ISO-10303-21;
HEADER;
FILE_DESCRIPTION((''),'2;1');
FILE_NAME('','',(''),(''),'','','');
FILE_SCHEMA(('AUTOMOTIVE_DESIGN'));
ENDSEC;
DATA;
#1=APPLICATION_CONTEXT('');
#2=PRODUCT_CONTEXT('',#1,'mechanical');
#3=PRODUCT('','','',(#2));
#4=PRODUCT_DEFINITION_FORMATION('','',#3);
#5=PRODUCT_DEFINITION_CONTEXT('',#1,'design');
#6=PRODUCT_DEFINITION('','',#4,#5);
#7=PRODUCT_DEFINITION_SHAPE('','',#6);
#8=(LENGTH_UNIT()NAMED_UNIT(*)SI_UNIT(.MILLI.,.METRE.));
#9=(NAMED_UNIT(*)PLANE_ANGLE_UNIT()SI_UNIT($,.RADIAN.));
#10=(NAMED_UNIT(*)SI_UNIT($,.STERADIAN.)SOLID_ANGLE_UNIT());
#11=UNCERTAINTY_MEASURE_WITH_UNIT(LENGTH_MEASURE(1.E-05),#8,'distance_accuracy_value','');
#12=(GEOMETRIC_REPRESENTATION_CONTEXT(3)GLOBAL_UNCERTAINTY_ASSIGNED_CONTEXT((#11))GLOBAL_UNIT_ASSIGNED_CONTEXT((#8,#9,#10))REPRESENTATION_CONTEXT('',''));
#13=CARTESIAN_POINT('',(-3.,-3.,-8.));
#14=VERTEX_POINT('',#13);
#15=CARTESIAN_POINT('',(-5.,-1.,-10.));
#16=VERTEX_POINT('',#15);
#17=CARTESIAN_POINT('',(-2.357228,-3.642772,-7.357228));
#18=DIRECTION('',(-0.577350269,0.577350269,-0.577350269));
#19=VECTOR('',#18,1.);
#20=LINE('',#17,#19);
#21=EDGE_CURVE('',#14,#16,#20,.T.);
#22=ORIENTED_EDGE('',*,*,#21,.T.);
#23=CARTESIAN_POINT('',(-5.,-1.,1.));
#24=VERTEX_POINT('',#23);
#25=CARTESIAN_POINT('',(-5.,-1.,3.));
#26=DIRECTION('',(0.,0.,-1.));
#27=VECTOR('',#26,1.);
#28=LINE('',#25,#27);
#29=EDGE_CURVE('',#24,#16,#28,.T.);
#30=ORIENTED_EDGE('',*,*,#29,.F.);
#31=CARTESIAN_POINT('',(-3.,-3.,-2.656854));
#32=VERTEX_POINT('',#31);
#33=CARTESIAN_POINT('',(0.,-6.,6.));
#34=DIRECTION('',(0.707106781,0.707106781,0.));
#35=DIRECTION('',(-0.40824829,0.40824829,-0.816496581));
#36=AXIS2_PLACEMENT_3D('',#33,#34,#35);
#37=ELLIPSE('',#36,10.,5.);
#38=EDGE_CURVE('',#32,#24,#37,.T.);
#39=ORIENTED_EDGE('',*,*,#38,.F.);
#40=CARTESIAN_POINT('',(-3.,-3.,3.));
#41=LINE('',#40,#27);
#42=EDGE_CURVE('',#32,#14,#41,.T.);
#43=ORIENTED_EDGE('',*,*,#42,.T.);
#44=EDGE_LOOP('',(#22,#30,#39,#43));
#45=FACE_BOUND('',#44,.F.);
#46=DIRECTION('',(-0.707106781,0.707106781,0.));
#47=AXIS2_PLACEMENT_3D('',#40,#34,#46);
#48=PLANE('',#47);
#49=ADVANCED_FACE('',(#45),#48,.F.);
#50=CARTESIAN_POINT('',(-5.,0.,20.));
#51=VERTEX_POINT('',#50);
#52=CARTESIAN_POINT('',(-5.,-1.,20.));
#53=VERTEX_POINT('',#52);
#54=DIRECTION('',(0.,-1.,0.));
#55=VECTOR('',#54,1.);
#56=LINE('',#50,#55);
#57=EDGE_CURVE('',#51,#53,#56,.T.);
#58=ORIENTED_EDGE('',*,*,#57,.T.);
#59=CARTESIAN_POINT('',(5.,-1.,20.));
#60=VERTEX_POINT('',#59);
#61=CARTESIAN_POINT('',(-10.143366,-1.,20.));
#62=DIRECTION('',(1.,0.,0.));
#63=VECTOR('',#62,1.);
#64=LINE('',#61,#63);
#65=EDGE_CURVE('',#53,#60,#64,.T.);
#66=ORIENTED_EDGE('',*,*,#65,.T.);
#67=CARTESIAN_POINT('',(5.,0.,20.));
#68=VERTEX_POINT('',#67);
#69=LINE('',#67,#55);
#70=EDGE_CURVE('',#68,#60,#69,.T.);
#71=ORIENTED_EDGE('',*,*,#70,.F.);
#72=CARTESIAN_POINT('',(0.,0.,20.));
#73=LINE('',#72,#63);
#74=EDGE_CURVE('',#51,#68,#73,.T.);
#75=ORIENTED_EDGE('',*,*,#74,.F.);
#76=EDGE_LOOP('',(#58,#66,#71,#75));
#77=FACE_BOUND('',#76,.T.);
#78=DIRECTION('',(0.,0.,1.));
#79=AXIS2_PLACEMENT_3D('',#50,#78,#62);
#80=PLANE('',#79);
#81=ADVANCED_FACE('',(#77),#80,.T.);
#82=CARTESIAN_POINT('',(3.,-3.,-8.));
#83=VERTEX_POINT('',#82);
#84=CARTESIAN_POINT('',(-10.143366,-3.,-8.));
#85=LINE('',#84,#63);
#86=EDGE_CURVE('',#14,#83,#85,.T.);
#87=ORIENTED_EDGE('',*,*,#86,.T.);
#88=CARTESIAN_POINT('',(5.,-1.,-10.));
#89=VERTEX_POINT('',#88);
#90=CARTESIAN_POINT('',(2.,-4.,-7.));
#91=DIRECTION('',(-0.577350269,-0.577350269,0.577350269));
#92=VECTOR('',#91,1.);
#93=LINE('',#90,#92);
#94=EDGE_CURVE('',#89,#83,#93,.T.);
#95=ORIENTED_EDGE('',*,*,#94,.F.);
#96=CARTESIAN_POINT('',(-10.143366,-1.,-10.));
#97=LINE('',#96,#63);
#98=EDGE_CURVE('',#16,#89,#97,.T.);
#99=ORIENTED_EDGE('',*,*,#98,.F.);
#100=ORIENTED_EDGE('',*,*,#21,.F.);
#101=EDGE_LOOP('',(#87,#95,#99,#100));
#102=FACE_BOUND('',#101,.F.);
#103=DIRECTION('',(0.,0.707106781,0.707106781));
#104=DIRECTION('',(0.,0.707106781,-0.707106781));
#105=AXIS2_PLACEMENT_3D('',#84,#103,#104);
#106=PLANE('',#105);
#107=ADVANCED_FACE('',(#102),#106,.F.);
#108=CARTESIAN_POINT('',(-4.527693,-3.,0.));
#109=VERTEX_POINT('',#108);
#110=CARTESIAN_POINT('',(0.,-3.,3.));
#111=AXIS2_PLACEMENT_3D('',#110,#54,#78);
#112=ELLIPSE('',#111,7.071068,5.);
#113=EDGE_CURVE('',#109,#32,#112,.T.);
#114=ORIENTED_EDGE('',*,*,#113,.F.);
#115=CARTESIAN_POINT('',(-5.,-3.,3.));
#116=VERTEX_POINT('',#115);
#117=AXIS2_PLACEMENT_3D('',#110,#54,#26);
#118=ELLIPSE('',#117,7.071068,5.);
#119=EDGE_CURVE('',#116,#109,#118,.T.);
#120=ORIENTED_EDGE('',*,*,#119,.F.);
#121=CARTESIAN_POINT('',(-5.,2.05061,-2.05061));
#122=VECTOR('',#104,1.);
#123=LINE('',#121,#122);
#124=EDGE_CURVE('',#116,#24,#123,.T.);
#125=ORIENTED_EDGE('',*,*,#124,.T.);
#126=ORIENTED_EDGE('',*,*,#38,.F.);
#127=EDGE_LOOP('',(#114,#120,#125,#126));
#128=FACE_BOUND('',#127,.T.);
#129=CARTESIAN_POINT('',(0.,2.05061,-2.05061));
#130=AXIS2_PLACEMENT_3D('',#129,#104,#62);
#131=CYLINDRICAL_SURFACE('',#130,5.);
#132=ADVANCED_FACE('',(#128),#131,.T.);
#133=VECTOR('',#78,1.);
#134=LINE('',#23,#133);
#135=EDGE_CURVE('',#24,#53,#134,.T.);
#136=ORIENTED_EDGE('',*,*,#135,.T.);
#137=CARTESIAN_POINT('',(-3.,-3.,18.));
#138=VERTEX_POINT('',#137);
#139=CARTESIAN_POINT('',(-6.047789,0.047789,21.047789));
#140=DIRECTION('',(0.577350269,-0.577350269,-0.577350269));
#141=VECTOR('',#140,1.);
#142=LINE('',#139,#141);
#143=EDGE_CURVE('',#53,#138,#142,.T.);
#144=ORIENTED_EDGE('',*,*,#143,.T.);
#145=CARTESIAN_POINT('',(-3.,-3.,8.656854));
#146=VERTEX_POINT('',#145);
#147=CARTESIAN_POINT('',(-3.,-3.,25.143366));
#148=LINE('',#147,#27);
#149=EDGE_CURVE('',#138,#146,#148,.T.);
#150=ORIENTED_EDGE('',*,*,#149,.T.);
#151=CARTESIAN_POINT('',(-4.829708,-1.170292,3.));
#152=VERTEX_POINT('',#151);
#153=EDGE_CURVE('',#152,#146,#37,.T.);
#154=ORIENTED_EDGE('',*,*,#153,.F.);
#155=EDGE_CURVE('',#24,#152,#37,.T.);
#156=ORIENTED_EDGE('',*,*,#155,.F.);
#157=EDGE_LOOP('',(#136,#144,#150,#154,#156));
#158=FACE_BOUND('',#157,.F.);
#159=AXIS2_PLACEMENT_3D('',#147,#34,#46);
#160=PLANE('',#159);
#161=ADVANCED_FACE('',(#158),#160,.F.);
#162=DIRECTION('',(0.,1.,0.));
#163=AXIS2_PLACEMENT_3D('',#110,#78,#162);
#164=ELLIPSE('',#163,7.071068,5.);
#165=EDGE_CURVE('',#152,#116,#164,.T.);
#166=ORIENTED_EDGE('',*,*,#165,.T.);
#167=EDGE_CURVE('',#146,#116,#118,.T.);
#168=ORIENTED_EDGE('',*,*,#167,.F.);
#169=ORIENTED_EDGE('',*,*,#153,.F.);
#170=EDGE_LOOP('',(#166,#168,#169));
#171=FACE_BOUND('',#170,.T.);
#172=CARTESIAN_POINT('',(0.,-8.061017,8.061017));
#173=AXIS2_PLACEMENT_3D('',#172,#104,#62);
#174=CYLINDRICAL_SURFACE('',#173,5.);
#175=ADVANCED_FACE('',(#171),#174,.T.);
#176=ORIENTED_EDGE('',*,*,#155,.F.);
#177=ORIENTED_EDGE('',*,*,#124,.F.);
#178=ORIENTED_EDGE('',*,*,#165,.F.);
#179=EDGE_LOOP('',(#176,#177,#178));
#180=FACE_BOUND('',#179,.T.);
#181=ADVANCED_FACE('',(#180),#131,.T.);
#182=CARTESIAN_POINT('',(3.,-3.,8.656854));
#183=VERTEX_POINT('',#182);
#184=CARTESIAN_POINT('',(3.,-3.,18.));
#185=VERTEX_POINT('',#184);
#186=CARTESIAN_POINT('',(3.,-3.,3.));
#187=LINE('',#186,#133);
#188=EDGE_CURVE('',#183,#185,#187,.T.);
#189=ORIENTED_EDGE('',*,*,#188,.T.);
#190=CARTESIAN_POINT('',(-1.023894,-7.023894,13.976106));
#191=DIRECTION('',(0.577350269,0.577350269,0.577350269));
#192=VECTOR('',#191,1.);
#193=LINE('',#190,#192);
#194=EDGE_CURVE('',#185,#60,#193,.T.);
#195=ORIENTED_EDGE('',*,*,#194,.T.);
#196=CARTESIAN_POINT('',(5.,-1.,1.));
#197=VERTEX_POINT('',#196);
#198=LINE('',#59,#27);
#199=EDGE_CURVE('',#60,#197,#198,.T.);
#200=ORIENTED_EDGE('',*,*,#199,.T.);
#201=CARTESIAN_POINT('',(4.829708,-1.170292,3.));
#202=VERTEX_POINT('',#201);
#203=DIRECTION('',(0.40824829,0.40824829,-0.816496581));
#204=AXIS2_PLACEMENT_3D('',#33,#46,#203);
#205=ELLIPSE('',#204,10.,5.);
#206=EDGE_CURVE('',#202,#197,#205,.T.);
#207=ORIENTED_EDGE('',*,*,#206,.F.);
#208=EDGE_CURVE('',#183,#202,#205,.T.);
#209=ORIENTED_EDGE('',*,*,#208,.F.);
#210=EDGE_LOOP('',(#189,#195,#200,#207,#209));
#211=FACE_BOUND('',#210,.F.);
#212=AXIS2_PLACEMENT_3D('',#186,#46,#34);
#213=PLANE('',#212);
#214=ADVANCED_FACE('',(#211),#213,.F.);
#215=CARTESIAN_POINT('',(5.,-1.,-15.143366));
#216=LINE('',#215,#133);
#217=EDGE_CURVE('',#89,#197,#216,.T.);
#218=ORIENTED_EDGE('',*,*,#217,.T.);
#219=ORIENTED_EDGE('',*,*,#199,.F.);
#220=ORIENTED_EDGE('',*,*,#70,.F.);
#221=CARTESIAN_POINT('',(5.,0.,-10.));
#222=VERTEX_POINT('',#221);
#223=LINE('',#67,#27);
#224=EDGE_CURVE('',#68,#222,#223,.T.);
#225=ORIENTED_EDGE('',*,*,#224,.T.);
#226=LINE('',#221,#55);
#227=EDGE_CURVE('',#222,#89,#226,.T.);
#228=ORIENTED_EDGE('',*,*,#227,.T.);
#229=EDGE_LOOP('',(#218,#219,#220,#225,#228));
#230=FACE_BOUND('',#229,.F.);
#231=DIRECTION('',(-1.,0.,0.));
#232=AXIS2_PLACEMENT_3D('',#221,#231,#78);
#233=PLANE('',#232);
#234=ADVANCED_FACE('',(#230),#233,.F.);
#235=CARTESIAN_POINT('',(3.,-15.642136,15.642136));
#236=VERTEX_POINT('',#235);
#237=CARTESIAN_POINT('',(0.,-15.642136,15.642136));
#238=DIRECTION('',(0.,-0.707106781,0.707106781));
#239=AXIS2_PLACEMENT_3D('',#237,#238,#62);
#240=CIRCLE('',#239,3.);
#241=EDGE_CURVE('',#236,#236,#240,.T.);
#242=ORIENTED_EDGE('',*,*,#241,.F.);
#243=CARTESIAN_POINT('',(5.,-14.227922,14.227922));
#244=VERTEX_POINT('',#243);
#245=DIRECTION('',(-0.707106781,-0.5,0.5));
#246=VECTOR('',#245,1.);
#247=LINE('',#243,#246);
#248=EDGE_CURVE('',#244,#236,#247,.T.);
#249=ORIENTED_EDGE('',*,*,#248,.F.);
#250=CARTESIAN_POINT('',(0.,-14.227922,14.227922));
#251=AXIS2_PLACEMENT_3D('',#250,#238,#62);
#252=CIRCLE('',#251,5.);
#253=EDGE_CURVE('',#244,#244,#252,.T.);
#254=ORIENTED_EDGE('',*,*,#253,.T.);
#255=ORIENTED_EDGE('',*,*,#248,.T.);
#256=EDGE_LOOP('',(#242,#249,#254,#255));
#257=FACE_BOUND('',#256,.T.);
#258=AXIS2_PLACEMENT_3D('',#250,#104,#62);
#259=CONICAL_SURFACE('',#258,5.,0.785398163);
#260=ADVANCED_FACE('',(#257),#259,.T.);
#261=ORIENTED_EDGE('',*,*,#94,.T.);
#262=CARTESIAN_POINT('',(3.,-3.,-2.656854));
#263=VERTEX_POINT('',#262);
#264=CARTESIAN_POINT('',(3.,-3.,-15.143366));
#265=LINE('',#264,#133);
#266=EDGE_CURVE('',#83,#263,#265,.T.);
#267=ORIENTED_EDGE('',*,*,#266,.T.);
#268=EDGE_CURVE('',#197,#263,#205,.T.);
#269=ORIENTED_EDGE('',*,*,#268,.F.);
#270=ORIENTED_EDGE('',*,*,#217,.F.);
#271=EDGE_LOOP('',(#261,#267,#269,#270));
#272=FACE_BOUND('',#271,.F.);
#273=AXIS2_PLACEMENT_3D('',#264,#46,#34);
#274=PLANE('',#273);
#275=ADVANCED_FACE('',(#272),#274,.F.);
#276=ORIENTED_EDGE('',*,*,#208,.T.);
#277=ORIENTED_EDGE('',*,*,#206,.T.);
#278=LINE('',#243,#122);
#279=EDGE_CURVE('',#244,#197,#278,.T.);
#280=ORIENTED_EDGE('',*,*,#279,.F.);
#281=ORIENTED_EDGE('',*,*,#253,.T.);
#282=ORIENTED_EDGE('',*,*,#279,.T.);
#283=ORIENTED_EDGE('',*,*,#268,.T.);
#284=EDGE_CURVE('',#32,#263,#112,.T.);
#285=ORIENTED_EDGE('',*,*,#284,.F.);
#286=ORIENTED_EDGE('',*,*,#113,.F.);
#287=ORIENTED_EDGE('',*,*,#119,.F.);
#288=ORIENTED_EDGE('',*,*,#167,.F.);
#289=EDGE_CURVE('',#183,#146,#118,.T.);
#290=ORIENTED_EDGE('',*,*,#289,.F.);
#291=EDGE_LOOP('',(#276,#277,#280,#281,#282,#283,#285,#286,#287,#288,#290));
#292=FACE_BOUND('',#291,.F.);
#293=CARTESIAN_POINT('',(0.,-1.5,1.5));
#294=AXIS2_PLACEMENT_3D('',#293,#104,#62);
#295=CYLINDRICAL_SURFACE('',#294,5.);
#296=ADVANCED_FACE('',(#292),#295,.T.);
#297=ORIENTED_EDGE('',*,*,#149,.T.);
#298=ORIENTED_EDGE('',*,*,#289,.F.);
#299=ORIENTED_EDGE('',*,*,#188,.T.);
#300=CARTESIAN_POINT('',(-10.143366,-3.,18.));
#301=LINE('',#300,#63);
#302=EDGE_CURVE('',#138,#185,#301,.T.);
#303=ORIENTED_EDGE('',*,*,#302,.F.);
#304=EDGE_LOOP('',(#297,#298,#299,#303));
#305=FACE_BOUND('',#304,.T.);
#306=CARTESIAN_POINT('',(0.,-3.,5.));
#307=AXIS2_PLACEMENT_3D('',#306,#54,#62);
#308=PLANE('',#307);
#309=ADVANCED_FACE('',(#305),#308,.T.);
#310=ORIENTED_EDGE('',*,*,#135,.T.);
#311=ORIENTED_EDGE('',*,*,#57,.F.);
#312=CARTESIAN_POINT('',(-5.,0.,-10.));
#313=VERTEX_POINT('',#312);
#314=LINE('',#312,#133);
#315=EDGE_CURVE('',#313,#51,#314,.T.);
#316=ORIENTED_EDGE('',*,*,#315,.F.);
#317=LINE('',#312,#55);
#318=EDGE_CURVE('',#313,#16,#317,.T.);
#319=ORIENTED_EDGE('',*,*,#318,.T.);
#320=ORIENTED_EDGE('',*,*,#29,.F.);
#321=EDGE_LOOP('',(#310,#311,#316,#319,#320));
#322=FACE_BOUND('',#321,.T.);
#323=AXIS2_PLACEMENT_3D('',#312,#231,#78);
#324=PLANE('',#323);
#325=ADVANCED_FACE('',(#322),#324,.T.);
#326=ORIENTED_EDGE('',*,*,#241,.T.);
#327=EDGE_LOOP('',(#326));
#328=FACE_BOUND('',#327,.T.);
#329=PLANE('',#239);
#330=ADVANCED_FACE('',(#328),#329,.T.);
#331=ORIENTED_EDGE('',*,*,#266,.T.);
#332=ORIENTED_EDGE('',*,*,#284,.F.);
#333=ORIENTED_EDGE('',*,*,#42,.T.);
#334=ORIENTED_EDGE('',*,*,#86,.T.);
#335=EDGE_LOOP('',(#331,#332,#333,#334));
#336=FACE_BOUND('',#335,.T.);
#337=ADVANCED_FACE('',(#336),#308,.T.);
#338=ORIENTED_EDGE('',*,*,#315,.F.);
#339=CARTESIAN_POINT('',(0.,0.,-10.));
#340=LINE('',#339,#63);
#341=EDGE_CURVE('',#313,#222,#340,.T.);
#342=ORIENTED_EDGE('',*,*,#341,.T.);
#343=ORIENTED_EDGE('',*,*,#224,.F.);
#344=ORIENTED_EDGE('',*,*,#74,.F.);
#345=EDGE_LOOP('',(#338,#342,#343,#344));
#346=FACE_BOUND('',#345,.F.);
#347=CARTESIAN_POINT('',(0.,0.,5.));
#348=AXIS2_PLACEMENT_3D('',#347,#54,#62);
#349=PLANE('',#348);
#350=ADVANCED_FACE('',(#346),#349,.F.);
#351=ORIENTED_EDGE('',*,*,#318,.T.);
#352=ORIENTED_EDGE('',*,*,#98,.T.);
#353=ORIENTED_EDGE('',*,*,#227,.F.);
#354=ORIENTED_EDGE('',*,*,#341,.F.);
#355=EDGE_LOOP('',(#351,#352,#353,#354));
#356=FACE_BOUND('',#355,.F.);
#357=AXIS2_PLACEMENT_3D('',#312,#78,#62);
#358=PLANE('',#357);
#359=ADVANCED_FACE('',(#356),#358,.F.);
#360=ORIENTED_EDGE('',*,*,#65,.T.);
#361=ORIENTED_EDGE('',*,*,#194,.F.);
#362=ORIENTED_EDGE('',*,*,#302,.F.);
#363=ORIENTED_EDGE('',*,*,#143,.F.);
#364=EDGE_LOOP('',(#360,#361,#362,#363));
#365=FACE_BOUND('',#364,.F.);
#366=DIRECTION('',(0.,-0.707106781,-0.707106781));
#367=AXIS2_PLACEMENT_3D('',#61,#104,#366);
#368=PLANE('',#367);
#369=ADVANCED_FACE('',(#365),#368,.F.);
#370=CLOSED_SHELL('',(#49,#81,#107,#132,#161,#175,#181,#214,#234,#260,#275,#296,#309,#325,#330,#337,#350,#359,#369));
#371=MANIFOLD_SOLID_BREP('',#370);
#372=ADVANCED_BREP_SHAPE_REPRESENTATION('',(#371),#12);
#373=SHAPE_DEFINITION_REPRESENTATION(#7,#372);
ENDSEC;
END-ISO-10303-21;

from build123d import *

# Parameters (mm, degrees)
F0_W          = 10
F0_H          = 30
F1_DEPTH      = 3
F4_R          = 5
F5_DEPTH      = 20
F5_DEPTH_BACK = 5
F6_T1_DEPTH   = 20.2867319519
F6_T6_DEPTH   = 22.1433659759
F6_S7_R       = 5
F6_T8_DEPTH   = 13
F6_T14_DEPTH  = 22.1433659759
F6_S15_R      = 5
F6_T16_DEPTH  = 13
F6_T20_DEPTH  = 18.1433659759
F6_S21_R      = 5
F6_T22_DEPTH  = 11
F6_T26_DEPTH  = 18.1433659759
F6_S27_R      = 5
F6_T28_DEPTH  = 11
F7_DEPTH      = 25


# Not quite as in the source:
# - a fillet or chamfer that OpenCascade refuses, or shapes differently, is made with other operations: its cross-section is extruded or revolved along the edge and cut away or added


with BuildPart() as f1:
    # F0 (on Front) → F1 (new body)
    with BuildSketch(Plane.XZ):
        with Locations((0, 5)):
            Rectangle(F0_W, F0_H)
    extrude(amount=F1_DEPTH)

    # F4 (on face) → F5 (join, two sides)
    with BuildSketch(Plane(origin=(0, -1.5, 1.5), x_dir=(1, 0, 0), z_dir=(0, -0.7071067812, 0.7071067812))) as f5_sk:
        Circle(F4_R)
    extrude(amount=F5_DEPTH)
    extrude(f5_sk.sketch, amount=-F5_DEPTH_BACK)

    # F6: chamfer of 2 on 5 edges, made by hand

    # F6_s2 → F6_t1 (cut)
    with BuildSketch(Plane.YZ.offset(-10.1433659759)):
        Polygon((-1, 20), (-3, 18), (-3, 20), align=None)
        Polygon((-3, -8), (-1, -10), (-3, -10), align=None)
    extrude(amount=F6_T1_DEPTH, mode=Mode.SUBTRACT)


with BuildPart() as f6_tool4:
    # F6_s5 → F6_t6 (new body)
    with BuildSketch(Plane.XY.offset(25.1433659759)):
        Polygon((-3, -3), (-5, -1), (-5, -3), align=None)
    extrude(amount=-F6_T6_DEPTH)

    # F6_s7 → F6_t8 (cut, symmetric)
    with BuildSketch(Plane(origin=(0, -8.0610173055, 8.0610173055), x_dir=(1, 0, 0), z_dir=(0, 0.7071067812, -0.7071067812))):
        Circle(F6_S7_R)
    extrude(amount=F6_T8_DEPTH, both=True, mode=Mode.SUBTRACT)


with BuildPart() as f1_1:
    add(f1.part)

    # F6_t3: cut F6_tool4
    add(f6_tool4.part, mode=Mode.SUBTRACT)

    # F6_s9 → F6_t10 (revolve, cut)
    with BuildSketch(Plane(origin=(0, 0, 0), x_dir=(1, 0, 0), z_dir=(0, -0.7071067812, -0.7071067812))):
        Polygon((5, 20.1213203436), (3, 22.1213203436), (5, 22.1213203436), align=None)
    revolve(axis=Axis((0, -15.6421356237, 15.6421356237), (0, -0.7071067812, 0.7071067812)), mode=Mode.SUBTRACT)


with BuildPart() as f6_tool12:
    # F6_s13 → F6_t14 (new body)
    with BuildSketch(Plane.XY.offset(3)):
        Polygon((3, -3), (5, -1), (5, -3), align=None)
    extrude(amount=F6_T14_DEPTH)

    # F6_s15 → F6_t16 (cut, symmetric)
    with BuildSketch(Plane(origin=(0, -8.0610173055, 8.0610173055), x_dir=(1, 0, 0), z_dir=(0, 0.7071067812, -0.7071067812))):
        Circle(F6_S15_R)
    extrude(amount=F6_T16_DEPTH, both=True, mode=Mode.SUBTRACT)


with BuildPart() as f1_2:
    add(f1_1.part)

    # F6_t11: cut F6_tool12
    add(f6_tool12.part, mode=Mode.SUBTRACT)


with BuildPart() as f6_tool18:
    # F6_s19 → F6_t20 (new body)
    with BuildSketch(Plane.XY.offset(-15.1433659759)):
        Polygon((3, -3), (5, -1), (5, -3), align=None)
    extrude(amount=F6_T20_DEPTH)

    # F6_s21 → F6_t22 (cut, symmetric)
    with BuildSketch(Plane(origin=(0, 2.0506096654, -2.0506096654), x_dir=(1, 0, 0), z_dir=(0, 0.7071067812, -0.7071067812))):
        Circle(F6_S21_R)
    extrude(amount=F6_T22_DEPTH, both=True, mode=Mode.SUBTRACT)


with BuildPart() as f1_3:
    add(f1_2.part)

    # F6_t17: cut F6_tool18
    add(f6_tool18.part, mode=Mode.SUBTRACT)


with BuildPart() as f6_tool24:
    # F6_s25 → F6_t26 (new body)
    with BuildSketch(Plane.XY.offset(3)):
        Polygon((-3, -3), (-5, -1), (-5, -3), align=None)
    extrude(amount=-F6_T26_DEPTH)

    # F6_s27 → F6_t28 (cut, symmetric)
    with BuildSketch(Plane(origin=(0, 2.0506096654, -2.0506096654), x_dir=(1, 0, 0), z_dir=(0, 0.7071067812, -0.7071067812))):
        Circle(F6_S27_R)
    extrude(amount=F6_T28_DEPTH, both=True, mode=Mode.SUBTRACT)


with BuildPart() as f1_4:
    add(f1_3.part)

    # F6_t23: cut F6_tool24
    add(f6_tool24.part, mode=Mode.SUBTRACT)

    # F0 (on Front) → F7 (cut)
    with BuildSketch(Plane.XZ):
        with Locations((0, 5)):
            Rectangle(F0_W, F0_H)
    extrude(amount=-F7_DEPTH, mode=Mode.SUBTRACT)


solid = f1_4.part
